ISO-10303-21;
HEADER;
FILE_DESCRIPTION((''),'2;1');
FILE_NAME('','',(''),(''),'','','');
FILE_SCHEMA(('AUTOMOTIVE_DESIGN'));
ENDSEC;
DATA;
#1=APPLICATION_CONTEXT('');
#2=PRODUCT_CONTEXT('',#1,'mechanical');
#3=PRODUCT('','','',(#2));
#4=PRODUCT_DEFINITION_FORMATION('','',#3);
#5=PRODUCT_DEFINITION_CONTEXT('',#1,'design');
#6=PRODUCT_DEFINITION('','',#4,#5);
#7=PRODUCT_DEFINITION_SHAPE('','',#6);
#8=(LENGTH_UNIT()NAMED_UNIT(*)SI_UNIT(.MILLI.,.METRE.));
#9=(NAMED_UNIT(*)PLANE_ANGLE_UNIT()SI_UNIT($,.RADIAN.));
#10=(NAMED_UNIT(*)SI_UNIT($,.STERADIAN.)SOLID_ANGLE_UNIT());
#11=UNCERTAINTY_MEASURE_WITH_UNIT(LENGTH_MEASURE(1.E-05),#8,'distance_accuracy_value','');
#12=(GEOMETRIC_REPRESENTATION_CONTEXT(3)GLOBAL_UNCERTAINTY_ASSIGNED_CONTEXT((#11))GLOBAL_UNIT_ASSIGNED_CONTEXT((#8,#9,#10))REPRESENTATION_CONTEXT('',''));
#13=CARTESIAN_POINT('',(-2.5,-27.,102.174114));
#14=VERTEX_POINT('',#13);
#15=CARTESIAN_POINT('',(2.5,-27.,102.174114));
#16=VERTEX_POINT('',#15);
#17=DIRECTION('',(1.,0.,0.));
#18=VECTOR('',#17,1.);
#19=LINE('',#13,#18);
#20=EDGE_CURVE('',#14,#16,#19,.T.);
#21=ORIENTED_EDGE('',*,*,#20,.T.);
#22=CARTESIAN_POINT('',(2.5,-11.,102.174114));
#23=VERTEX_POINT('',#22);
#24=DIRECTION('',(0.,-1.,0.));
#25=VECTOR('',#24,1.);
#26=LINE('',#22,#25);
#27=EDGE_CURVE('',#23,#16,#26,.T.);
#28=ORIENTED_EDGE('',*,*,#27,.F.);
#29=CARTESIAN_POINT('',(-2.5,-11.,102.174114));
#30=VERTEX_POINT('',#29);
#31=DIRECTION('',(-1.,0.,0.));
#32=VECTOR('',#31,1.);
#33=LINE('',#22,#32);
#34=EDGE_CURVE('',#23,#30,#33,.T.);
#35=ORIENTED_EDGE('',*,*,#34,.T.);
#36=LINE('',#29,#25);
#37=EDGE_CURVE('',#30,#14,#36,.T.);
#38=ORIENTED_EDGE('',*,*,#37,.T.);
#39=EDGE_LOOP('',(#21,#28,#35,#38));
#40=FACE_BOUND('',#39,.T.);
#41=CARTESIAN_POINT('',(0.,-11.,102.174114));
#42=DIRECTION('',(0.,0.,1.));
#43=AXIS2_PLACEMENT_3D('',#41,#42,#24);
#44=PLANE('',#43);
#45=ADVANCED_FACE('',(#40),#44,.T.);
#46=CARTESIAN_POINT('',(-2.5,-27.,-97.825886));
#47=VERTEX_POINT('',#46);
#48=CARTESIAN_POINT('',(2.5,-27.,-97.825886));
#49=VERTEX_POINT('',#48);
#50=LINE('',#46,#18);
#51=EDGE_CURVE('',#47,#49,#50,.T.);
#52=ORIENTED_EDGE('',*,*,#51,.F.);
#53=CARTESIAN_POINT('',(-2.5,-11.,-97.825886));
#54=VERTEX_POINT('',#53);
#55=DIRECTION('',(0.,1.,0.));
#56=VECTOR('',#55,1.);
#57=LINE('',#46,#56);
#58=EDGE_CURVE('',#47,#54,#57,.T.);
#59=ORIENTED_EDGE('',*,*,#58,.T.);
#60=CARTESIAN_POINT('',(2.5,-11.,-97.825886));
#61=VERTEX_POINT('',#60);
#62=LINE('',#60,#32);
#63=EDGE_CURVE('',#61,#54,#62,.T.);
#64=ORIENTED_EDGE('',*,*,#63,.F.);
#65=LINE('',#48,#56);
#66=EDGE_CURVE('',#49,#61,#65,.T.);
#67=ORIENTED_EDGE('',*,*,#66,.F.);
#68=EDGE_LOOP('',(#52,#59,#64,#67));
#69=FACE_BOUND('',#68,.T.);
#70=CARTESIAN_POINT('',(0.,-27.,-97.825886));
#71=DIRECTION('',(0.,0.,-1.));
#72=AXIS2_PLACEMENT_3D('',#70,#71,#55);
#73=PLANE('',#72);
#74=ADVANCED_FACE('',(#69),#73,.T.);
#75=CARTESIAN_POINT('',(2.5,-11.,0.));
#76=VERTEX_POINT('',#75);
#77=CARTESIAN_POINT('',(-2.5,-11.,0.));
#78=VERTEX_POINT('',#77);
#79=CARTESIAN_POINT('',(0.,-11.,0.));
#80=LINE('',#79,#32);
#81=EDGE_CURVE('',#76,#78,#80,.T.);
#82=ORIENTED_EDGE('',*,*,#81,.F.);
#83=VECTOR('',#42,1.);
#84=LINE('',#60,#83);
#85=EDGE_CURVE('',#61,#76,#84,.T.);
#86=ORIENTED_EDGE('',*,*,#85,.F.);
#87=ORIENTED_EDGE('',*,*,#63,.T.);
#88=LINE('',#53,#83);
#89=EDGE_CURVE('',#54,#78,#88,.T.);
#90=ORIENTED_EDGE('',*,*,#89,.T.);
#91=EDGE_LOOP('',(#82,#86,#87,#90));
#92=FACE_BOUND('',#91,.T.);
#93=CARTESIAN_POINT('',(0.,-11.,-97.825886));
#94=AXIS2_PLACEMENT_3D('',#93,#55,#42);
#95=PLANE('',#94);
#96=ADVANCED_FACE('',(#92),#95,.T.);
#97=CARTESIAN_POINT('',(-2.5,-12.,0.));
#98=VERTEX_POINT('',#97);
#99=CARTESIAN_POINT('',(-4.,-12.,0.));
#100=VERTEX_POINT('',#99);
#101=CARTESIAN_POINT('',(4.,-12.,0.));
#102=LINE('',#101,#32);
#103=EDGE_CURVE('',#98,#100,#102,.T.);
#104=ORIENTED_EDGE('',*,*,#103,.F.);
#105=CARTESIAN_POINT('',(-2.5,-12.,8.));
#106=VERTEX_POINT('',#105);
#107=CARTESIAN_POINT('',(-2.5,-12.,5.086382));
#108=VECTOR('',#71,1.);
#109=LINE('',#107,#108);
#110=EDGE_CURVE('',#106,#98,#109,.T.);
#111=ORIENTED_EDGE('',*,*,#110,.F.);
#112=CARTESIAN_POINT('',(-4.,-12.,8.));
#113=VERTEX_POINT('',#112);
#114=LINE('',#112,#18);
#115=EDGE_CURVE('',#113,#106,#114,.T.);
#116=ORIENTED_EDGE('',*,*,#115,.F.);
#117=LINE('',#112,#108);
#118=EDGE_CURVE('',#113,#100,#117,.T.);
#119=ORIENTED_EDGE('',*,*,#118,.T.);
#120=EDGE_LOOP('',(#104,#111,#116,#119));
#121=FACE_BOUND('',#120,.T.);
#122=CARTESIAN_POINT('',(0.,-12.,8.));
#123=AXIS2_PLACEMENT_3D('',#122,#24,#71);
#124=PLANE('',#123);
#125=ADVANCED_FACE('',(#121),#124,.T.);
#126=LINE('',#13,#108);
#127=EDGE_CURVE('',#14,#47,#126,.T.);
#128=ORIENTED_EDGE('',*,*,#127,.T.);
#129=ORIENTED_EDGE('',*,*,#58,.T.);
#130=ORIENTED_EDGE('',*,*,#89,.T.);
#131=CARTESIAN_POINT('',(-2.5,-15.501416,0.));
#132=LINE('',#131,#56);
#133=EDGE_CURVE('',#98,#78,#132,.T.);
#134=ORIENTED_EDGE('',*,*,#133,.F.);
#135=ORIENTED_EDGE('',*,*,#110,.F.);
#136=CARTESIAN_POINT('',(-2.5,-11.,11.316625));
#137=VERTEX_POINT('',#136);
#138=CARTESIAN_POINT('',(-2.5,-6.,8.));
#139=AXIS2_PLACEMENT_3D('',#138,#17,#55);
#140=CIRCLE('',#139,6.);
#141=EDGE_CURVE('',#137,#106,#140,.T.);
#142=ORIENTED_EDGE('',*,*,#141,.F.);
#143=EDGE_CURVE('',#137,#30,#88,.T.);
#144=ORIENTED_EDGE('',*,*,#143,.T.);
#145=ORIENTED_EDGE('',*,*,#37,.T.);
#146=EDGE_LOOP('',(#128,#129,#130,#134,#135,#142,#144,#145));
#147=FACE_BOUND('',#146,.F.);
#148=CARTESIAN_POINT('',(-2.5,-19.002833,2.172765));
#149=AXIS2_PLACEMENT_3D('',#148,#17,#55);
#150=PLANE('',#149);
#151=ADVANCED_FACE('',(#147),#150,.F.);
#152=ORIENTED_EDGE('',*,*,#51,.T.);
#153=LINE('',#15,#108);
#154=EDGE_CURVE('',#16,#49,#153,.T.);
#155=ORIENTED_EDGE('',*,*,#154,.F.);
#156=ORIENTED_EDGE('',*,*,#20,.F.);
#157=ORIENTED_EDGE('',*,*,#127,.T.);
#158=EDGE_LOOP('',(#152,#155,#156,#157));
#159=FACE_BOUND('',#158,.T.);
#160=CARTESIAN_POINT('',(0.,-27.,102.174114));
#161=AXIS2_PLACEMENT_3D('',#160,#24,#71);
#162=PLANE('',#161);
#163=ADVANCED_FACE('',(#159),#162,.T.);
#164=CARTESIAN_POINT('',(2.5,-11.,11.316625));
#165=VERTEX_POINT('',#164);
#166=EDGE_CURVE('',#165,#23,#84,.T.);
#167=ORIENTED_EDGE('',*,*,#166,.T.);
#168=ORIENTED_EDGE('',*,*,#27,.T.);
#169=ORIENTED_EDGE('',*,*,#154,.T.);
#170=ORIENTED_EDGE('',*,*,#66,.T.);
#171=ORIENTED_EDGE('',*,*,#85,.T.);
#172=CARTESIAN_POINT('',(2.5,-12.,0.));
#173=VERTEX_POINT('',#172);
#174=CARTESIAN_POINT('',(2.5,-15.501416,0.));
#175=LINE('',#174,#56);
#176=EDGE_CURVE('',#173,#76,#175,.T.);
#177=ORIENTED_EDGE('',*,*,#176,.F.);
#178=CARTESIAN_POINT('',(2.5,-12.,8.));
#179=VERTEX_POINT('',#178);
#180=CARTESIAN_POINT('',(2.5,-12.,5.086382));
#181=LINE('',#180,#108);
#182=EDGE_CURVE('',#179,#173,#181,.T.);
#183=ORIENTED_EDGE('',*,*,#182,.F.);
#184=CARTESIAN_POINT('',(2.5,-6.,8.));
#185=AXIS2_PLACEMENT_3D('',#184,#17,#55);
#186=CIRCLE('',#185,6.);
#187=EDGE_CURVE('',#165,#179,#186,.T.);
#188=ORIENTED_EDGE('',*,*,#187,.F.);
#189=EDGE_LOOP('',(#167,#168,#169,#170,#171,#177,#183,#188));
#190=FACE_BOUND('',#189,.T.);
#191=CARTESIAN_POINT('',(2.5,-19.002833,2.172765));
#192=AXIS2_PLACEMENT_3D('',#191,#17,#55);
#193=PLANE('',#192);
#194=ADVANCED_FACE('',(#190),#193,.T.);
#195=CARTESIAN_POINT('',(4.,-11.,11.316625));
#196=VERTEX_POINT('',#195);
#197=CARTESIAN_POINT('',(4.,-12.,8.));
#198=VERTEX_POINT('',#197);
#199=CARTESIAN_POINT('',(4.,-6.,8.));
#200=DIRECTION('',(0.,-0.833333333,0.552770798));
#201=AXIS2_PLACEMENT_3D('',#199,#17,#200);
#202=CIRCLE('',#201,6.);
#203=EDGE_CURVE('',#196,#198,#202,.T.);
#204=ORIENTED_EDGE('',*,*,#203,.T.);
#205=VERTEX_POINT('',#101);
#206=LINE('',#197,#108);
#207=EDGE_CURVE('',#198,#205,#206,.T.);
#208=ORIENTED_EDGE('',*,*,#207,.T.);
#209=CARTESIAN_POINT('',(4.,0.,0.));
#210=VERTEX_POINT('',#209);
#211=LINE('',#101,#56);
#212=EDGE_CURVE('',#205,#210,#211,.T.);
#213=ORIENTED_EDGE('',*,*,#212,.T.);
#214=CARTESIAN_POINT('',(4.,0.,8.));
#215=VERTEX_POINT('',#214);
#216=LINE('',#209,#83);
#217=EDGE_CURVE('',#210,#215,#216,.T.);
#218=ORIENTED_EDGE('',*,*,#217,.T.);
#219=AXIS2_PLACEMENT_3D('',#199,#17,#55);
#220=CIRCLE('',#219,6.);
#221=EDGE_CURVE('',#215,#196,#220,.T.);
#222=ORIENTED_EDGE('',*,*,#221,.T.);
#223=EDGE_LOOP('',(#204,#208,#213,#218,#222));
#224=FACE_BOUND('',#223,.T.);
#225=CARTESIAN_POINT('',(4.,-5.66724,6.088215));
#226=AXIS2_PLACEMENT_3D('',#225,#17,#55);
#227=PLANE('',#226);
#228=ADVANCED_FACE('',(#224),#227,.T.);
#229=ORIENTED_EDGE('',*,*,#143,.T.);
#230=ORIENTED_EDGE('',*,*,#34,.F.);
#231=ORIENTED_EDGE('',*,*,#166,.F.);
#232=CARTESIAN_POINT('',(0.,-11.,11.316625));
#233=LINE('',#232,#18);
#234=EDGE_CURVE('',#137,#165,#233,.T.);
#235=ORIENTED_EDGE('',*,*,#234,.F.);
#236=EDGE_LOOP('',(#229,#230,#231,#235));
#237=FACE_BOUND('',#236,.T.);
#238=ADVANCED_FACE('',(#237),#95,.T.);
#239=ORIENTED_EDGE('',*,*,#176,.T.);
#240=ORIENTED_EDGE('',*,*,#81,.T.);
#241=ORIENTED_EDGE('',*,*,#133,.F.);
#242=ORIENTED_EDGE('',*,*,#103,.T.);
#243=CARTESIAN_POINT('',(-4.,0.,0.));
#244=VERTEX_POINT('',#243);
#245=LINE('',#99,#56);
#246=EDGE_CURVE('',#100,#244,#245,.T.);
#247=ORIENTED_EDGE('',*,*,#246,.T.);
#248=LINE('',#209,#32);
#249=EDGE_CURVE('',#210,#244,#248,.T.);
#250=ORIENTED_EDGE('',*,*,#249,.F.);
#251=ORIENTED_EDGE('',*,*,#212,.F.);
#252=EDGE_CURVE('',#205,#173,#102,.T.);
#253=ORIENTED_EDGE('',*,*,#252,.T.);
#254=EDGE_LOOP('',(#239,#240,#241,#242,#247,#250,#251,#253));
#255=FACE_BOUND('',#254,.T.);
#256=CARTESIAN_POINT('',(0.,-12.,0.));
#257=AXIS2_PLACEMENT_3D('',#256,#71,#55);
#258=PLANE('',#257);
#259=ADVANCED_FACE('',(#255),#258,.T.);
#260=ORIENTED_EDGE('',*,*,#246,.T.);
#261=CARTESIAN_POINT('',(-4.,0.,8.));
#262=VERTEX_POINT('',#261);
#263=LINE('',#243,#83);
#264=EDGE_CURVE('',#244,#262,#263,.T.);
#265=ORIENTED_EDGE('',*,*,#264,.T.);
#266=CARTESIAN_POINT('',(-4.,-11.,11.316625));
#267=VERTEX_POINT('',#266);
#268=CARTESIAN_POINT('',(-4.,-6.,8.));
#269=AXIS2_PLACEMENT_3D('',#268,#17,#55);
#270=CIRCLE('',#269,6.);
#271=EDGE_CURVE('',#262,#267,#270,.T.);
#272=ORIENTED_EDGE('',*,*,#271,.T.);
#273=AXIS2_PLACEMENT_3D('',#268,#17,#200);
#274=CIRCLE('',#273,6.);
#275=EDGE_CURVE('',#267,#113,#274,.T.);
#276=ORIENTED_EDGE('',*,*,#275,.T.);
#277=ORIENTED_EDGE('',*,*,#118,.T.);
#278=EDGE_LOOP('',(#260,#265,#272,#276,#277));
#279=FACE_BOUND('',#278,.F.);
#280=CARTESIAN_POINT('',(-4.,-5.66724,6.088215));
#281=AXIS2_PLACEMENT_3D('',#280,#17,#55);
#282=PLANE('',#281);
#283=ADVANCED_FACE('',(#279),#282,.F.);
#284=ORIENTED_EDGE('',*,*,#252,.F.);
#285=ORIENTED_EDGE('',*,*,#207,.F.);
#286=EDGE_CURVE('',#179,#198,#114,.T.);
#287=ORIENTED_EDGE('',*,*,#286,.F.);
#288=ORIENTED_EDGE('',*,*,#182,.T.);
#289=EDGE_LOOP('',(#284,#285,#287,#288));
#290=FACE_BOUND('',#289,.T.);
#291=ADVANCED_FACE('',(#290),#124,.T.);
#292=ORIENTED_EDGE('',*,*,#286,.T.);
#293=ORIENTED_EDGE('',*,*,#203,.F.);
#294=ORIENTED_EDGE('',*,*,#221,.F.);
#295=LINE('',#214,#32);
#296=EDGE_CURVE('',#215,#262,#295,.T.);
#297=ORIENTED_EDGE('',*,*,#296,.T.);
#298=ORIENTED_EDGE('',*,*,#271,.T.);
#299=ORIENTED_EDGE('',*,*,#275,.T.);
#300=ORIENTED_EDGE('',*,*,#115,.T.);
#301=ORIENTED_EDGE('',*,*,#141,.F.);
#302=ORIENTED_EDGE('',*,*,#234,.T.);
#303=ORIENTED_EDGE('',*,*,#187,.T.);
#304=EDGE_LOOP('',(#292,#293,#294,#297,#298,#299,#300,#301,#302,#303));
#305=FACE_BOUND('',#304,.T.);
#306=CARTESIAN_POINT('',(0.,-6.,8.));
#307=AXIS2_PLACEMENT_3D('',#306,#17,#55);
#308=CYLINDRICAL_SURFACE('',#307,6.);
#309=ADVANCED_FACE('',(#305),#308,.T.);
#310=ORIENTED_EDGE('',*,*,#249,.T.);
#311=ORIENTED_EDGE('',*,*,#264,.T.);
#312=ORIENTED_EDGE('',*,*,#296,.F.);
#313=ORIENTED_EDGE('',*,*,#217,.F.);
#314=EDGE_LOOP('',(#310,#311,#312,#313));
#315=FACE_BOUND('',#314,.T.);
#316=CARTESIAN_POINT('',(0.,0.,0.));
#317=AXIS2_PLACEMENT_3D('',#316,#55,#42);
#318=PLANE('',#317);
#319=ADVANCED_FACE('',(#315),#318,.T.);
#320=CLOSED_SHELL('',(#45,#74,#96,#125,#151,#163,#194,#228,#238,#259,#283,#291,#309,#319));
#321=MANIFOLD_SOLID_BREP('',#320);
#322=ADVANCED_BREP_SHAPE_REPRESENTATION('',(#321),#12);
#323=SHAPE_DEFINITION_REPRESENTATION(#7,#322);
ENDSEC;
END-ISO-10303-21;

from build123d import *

# Parameters (mm, degrees)
F1_DEPTH = 2.5
F2_DEPTH = 4


# Not quite as in the source:
# - a feature names something its author has since deleted; it is built from what else it names


with BuildPart() as f1:
    # F0 (on Right) → F1 (new body, symmetric)
    with BuildSketch(Plane.YZ):
        with BuildLine():
            Line((-11, 102.1741141677), (-27, 102.1741141677))
            Line((-27, 102.1741141677), (-27, -97.8258858323))
            Line((-27, -97.8258858323), (-11, -97.8258858323))
            Line((-11, -97.8258858323), (-11, 0))
            Line((-11, 0), (-12, 0))
            Line((-12, 0), (-12, 8))
            ThreePointArc((-12, 8), (-11.7445626465, 9.7320508076), (-11, 11.3166247904))
            Line((-11, 11.3166247904), (-11, 102.1741141677))
        make_face()
        with BuildLine():
            Line((-11, 0), (-11, 11.3166247904))
            ThreePointArc((-11, 11.3166247904), (-11.7445626465, 9.7320508076), (-12, 8))
            Line((-12, 8), (-12, 0))
            Line((-12, 0), (-11, 0))
        make_face()
    extrude(amount=F1_DEPTH, both=True)

    # F0 (on Right) → F2 (join, symmetric)
    with BuildSketch(Plane.YZ):
        with BuildLine():
            ThreePointArc((0, 8), (-4.2679491924, 13.7445626465), (-11, 11.3166247904))
            Line((-11, 11.3166247904), (-11, 0))
            Line((-11, 0), (0, 0))
            Line((0, 0), (0, 8))
        make_face()
        with BuildLine():
            Line((-11, 0), (-11, 11.3166247904))
            ThreePointArc((-11, 11.3166247904), (-11.7445626465, 9.7320508076), (-12, 8))
            Line((-12, 8), (-12, 0))
            Line((-12, 0), (-11, 0))
        make_face()
    extrude(amount=F2_DEPTH, both=True)


solid = f1.part
